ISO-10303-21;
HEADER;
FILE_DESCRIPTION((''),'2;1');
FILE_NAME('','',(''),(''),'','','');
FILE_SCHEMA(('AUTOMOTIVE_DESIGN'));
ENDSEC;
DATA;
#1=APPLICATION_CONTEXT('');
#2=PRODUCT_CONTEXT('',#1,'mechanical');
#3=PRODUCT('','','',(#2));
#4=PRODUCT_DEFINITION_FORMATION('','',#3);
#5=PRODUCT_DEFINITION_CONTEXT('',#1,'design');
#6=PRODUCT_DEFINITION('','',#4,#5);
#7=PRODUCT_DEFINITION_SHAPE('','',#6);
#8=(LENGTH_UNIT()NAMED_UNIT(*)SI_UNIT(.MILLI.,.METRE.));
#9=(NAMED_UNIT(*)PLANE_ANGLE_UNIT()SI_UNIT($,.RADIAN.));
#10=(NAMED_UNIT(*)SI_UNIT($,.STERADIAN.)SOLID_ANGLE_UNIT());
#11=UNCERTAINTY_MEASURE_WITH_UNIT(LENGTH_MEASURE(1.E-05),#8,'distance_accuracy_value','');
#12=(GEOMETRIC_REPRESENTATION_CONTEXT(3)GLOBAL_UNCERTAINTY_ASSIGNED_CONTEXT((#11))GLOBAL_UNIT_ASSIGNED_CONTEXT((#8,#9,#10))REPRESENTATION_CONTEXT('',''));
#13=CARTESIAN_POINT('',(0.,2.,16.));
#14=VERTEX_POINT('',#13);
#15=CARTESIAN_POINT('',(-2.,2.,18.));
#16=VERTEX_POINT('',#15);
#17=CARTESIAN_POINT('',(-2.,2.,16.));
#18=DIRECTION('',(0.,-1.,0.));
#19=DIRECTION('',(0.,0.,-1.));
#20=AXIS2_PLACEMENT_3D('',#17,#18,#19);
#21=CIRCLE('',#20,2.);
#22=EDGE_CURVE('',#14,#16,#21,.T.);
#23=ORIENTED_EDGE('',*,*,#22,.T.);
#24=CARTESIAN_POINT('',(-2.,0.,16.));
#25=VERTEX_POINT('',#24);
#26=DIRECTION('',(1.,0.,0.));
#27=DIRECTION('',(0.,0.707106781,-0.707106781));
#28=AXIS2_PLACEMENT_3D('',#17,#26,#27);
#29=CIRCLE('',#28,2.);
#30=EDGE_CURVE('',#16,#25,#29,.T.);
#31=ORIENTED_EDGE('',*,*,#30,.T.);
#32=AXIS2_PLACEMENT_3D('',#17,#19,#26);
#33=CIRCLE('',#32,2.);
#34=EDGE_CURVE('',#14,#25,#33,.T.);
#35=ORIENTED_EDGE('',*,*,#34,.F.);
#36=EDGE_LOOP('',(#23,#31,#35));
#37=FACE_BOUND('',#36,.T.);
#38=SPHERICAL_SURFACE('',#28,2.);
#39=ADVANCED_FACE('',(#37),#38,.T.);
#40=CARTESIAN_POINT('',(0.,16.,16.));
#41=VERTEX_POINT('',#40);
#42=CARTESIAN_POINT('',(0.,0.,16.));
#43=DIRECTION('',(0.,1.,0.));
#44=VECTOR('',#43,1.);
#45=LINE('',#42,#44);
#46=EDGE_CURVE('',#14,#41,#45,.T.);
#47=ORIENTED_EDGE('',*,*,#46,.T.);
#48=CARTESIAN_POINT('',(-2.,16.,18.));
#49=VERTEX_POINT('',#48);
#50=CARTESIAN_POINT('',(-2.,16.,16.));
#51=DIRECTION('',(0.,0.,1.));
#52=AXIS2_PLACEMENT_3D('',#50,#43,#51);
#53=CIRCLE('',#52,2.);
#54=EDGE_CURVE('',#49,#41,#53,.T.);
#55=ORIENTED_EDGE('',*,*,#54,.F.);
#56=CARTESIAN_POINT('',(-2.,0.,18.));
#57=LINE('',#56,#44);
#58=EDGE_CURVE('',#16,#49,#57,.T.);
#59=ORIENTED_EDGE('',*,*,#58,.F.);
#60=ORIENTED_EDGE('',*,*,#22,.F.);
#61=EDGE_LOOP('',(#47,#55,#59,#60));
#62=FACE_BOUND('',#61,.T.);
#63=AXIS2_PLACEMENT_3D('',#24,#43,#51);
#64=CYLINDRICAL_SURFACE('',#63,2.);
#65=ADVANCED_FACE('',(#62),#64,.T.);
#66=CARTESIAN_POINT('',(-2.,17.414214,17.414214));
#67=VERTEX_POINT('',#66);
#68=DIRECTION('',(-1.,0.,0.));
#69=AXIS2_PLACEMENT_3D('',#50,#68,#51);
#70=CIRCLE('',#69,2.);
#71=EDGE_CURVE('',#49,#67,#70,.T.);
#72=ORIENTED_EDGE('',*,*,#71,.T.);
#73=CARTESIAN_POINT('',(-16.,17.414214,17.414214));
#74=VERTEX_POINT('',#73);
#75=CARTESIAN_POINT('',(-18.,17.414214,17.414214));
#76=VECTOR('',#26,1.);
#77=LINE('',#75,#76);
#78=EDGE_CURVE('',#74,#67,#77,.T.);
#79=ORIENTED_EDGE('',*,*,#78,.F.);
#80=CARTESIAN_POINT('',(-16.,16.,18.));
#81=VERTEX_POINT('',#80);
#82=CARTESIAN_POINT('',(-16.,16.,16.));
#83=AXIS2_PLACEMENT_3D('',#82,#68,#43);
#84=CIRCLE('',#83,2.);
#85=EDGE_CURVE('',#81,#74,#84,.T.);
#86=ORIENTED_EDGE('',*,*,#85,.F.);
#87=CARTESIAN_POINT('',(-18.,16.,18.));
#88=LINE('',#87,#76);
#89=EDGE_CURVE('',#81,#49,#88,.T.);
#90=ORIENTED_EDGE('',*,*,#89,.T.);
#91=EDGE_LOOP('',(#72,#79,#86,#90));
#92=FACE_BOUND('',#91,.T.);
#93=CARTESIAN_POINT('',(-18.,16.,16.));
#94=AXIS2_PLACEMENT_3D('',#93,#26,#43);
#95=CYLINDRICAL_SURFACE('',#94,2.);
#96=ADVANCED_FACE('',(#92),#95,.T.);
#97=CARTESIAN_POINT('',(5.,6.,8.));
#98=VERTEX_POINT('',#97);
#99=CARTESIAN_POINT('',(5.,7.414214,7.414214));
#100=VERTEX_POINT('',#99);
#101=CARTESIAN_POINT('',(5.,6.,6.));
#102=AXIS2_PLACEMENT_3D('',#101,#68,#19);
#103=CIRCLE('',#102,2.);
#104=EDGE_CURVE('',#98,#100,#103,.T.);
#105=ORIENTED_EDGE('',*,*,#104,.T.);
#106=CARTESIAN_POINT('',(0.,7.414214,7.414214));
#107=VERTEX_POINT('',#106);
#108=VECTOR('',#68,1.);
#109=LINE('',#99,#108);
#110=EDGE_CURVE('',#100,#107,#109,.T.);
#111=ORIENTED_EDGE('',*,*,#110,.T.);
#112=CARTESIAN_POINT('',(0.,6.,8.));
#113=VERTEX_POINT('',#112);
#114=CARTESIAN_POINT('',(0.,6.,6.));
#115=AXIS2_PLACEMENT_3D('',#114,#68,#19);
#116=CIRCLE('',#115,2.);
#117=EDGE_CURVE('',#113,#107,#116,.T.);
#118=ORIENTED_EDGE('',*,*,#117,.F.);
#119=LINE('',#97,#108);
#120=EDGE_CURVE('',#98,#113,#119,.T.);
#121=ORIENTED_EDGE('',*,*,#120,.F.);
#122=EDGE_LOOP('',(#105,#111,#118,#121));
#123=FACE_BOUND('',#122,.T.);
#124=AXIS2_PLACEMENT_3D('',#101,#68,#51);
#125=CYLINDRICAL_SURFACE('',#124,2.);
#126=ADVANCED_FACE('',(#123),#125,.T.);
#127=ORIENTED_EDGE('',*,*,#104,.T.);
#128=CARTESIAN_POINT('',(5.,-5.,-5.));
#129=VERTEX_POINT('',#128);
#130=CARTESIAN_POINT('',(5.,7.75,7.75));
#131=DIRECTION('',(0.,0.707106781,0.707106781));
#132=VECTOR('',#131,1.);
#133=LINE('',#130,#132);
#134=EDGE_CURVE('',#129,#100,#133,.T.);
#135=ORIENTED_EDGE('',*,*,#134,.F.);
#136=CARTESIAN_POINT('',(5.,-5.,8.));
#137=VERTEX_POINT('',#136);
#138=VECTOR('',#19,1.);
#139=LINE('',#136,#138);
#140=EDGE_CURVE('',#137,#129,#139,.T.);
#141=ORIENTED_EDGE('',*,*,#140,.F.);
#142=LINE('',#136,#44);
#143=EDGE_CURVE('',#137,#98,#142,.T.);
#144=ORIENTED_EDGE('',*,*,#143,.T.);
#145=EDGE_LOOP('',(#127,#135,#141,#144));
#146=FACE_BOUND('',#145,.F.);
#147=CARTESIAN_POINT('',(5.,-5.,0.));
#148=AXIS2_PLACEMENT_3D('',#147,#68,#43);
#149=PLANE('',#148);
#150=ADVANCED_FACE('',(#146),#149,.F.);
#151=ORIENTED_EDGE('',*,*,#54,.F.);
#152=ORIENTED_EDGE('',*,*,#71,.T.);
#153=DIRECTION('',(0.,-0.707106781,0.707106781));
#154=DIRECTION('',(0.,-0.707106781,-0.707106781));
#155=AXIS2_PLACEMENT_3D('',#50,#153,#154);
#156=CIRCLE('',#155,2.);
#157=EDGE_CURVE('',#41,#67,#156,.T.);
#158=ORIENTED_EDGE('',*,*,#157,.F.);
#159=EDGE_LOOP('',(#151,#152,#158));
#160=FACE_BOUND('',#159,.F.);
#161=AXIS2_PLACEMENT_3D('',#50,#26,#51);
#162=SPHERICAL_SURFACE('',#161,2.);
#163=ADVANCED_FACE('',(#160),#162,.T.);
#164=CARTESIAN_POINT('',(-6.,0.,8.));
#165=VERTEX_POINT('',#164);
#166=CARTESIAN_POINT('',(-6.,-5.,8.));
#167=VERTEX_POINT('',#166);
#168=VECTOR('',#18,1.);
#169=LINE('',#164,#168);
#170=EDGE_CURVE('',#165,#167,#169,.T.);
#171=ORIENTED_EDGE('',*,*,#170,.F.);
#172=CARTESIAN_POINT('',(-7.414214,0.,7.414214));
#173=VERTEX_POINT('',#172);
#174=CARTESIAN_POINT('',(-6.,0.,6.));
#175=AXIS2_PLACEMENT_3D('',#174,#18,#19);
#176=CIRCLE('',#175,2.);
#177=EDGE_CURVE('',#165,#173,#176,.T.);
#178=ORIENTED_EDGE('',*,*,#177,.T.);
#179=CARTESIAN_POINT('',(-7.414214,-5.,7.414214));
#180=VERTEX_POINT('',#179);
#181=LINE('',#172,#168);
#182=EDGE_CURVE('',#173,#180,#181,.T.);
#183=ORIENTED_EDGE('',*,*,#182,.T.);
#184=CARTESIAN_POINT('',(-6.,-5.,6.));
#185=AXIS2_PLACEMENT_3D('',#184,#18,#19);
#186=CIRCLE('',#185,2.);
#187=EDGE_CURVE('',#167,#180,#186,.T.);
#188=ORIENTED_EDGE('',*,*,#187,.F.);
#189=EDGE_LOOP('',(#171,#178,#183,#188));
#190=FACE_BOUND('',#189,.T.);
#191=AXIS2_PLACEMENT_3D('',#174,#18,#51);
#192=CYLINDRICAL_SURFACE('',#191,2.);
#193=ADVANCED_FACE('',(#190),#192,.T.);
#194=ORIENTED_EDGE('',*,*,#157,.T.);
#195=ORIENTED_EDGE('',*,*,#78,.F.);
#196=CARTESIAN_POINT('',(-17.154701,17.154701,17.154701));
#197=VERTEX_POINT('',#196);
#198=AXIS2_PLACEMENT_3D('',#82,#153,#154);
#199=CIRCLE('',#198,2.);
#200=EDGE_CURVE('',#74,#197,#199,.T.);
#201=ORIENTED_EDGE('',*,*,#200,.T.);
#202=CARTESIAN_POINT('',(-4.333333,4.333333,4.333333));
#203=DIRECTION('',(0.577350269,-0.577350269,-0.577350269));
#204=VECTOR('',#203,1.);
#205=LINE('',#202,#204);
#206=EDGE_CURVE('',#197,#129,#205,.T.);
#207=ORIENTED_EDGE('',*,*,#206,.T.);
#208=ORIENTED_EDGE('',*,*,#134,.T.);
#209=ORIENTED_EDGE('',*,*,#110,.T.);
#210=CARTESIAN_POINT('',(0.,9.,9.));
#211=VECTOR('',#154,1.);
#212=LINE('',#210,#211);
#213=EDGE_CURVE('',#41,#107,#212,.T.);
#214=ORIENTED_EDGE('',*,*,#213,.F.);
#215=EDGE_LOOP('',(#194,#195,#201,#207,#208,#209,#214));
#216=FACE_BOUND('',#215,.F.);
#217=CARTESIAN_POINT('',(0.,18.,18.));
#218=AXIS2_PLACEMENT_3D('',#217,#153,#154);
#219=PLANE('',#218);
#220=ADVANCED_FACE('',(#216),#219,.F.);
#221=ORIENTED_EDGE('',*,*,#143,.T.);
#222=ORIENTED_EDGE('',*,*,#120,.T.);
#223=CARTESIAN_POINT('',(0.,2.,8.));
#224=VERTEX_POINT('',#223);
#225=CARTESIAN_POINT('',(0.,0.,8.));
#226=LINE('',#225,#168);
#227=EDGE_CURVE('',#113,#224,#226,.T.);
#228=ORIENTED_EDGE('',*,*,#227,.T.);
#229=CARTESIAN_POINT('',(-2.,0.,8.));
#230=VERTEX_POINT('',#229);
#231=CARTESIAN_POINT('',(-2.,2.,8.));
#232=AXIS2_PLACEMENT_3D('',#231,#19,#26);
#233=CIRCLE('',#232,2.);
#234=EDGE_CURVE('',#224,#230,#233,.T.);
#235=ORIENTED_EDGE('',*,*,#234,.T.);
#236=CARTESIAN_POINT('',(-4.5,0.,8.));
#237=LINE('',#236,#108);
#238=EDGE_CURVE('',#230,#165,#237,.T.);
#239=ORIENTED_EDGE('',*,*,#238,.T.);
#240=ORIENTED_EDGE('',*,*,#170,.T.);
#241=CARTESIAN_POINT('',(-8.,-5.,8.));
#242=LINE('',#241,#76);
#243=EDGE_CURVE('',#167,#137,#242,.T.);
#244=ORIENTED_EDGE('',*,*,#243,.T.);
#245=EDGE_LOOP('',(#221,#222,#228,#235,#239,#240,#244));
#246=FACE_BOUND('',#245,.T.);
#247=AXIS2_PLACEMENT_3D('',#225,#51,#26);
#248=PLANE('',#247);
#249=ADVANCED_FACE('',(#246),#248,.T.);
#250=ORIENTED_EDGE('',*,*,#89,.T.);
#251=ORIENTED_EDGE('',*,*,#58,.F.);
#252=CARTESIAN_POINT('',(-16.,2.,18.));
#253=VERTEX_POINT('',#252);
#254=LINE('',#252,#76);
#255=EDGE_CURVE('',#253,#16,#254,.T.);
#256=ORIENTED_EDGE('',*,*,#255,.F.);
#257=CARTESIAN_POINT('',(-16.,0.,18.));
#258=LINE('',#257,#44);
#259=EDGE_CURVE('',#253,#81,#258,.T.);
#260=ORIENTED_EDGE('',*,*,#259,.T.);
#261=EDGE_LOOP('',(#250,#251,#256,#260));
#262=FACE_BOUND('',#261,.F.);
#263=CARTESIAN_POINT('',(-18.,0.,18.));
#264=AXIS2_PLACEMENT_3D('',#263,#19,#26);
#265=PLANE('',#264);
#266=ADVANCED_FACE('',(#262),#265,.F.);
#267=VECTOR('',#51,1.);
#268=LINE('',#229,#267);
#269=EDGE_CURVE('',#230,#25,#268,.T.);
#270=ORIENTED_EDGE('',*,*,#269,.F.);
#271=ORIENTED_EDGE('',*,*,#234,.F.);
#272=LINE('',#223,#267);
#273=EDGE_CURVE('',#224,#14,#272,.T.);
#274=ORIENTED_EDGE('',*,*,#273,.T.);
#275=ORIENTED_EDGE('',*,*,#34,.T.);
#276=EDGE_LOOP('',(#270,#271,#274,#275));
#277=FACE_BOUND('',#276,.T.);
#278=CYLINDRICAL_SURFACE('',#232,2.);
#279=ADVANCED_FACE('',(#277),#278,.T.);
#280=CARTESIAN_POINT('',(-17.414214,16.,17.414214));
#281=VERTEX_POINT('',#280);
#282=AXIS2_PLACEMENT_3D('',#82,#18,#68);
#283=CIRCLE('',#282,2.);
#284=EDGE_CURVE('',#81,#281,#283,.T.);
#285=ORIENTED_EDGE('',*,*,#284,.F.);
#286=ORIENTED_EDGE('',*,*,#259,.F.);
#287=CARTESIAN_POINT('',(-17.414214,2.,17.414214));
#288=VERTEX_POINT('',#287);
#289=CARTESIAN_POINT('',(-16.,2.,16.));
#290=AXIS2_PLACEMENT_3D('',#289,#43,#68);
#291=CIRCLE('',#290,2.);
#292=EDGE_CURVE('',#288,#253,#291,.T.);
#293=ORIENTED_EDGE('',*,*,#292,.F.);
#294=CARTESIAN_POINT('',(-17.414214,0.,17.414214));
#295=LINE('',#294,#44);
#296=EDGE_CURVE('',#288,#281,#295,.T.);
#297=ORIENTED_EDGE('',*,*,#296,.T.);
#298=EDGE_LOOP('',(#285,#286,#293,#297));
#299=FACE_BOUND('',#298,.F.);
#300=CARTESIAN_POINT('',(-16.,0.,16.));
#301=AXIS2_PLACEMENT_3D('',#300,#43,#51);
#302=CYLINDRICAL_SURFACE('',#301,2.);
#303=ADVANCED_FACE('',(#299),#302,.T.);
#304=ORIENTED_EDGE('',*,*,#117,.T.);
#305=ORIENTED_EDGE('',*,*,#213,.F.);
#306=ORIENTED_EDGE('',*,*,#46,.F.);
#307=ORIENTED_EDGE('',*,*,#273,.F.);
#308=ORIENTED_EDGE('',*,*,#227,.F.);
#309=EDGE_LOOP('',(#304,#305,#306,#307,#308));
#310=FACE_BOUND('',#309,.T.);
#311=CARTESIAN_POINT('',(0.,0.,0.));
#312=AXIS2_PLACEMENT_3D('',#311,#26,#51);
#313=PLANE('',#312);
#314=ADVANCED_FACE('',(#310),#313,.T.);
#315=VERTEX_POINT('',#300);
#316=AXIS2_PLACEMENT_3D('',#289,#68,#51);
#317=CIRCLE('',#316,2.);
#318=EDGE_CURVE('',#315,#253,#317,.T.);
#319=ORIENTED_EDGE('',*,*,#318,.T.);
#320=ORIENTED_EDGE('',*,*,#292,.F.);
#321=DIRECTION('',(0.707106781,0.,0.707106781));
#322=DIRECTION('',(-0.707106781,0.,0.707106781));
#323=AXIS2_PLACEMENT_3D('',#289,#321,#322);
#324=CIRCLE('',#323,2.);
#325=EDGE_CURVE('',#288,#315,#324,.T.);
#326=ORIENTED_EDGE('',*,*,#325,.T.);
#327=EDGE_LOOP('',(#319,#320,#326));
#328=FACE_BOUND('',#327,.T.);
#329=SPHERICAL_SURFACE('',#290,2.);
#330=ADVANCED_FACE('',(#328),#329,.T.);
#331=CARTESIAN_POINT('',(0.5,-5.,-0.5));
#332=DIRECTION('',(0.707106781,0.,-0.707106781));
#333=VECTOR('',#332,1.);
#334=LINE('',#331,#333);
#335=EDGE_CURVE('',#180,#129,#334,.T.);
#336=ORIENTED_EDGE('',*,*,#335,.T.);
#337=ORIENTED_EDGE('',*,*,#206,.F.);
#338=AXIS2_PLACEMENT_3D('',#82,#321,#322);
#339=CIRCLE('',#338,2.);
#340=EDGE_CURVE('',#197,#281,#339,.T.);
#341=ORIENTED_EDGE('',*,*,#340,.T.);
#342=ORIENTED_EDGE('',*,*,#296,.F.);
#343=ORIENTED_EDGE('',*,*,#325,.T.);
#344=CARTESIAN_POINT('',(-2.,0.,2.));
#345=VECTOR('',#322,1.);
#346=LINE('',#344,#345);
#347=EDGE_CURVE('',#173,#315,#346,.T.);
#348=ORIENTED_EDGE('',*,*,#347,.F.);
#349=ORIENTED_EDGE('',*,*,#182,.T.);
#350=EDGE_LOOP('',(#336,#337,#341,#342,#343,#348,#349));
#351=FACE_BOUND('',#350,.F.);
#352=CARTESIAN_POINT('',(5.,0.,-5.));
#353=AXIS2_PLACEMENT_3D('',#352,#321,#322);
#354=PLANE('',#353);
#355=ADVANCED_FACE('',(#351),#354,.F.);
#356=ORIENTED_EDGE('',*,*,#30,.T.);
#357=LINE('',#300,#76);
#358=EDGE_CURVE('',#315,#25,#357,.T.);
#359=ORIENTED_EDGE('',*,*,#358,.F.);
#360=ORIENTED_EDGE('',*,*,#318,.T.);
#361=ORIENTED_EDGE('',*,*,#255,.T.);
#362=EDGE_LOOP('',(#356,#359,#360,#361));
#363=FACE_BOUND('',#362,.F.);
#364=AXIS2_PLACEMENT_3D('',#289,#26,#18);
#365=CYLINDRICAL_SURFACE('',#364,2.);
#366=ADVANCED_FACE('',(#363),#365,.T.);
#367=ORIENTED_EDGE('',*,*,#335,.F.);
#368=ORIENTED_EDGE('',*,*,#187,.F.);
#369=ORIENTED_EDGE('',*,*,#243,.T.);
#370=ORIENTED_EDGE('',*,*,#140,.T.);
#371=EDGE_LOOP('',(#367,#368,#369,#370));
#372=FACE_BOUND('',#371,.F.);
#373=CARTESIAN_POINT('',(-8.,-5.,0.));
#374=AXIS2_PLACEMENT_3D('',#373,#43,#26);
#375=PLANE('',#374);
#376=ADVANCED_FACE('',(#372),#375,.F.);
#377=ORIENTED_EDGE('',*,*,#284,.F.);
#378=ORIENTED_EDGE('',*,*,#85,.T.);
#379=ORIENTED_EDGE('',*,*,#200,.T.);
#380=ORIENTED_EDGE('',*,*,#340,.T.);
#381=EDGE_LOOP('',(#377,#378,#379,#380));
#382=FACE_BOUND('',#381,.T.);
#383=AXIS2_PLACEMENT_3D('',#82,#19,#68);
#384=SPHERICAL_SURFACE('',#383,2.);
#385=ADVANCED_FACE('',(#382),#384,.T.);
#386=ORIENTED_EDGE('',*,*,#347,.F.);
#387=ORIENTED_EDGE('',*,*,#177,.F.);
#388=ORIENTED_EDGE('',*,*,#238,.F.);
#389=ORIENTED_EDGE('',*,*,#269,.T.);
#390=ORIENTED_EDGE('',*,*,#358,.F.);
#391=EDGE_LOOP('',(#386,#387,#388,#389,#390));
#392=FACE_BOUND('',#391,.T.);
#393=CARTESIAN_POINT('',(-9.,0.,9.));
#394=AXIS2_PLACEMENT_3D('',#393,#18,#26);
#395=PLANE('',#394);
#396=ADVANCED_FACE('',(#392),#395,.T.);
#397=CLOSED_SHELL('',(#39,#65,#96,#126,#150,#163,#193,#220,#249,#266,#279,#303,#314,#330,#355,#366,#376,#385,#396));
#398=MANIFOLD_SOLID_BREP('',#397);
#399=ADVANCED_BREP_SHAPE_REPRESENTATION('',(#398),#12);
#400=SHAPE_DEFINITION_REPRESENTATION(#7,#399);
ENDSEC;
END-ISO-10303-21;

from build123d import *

# Parameters (mm, degrees)
F0_W         = 18
F0_H         = 18
F1_DEPTH     = 18
F2_W         = 10
F2_H         = 10
F2_W_2       = 3
F2_H_2       = 3
F3_DEPTH     = 5
F4_DEPTH     = 8
F5_R         = 2
F6_R         = 2
F7_T1_DEPTH  = 8
F7_T3_DEPTH  = 8
F7_T5_DEPTH  = 8
F7_S9_W      = 2
F7_S9_H      = 2
F7_T10_DEPTH = 2
F7_S15_W     = 2
F7_S15_H     = 2
F7_T16_DEPTH = 2
F7_S21_W     = 2
F7_S21_H     = 2
F7_T22_DEPTH = 2
F8_R         = 2
F10_DEPTH    = 20
F12_DEPTH    = 20


# Not quite as in the source:
# - a fillet or chamfer that OpenCascade refuses, or shapes differently, is made with other operations: its cross-section is extruded or revolved along the edge and cut away or added


with BuildPart() as f1:
    # F0 (on Front) → F1 (new body)
    with BuildSketch(Plane.XZ):
        with Locations((-9, 9)):
            Rectangle(F0_W, F0_H)
    extrude(amount=-F1_DEPTH)

    # F2 (on Top) → F3 (join)
    with BuildSketch(Plane.XY):
        Rectangle(F2_W, F2_H)
        with Locations((-6.5, 0)):
            Rectangle(F2_W_2, F2_H)
        with Locations((0, 6.5)):
            Rectangle(F2_W, F2_H_2)
        with Locations((-6.5, 6.5)):
            Rectangle(F2_W_2, F2_H_2)
    extrude(amount=-F3_DEPTH)

    # F2 (on Top) → F4 (join)
    with BuildSketch(Plane.XY):
        Rectangle(F2_W, F2_H)
        with Locations((-6.5, 0)):
            Rectangle(F2_W_2, F2_H)
        with Locations((0, 6.5)):
            Rectangle(F2_W, F2_H_2)
        with Locations((-6.5, 6.5)):
            Rectangle(F2_W_2, F2_H_2)
    extrude(amount=F4_DEPTH)

    # F5
    f5_edges = [f1.edges().sort_by_distance(p)[0] for p in [
        (-18, 18, 9),
        (-18, 9, 18),
        (-9, 18, 18),
    ]]
    fillet(f5_edges, radius=F5_R)

    # F6
    f6_edges = [f1.edges().sort_by_distance(p)[0] for p in [
        (0, 8, 18),
        (-8, 0, 18),
        (-18, 8, 0),
    ]]
    fillet(f6_edges, radius=F6_R)

    # F7: fillet of radius 2 on 3 edges, made by hand

    # F7_s2 → F7_t1 (cut)
    with BuildSketch(Plane.XZ.offset(-16)):
        with BuildLine():
            ThreePointArc((-2, 0), (-0.5857864376, 0.5857864376), (0, 2))
            Line((0, 2), (0, 0))
            Line((0, 0), (-2, 0))
        make_face()
    extrude(amount=F7_T1_DEPTH, mode=Mode.SUBTRACT)

    # F7_s4 → F7_t3 (cut)
    with BuildSketch(Plane.XY.offset(8)):
        with BuildLine():
            ThreePointArc((0, 2), (-0.5857864376, 0.5857864376), (-2, 0))
            Line((-2, 0), (0, 0))
            Line((0, 0), (0, 2))
        make_face()
    extrude(amount=F7_T3_DEPTH, mode=Mode.SUBTRACT)

    # F7_s6 → F7_t5 (cut)
    with BuildSketch(Plane.YZ.offset(-16)):
        with BuildLine():
            ThreePointArc((2, 0), (0.5857864376, 0.5857864376), (0, 2))
            Line((0, 2), (0, 0))
            Line((0, 0), (2, 0))
        make_face()
    extrude(amount=F7_T5_DEPTH, mode=Mode.SUBTRACT)


with BuildPart() as f7_tool8:
    # F7_s9 → F7_t10 (new body)
    with BuildSketch(Plane.XY.offset(2)):
        with Locations((-17, 1)):
            Rectangle(F7_S9_W, F7_S9_H)
    extrude(amount=-F7_T10_DEPTH)

    # F7_s11 → F7_t12 (revolve, cut)
    with BuildSketch(Plane(origin=(-16, 2, 2), x_dir=(0.7071067812, 0.7071067812, 0), z_dir=(-0.7071067812, 0.7071067812, 0))):
        with BuildLine():
            ThreePointArc((0, -2), (2, 0), (0, 2))
            Line((0, 2), (0, -2))
        make_face()
    revolve(axis=Axis((-16, 2, 2), (0, 0, -1)), mode=Mode.SUBTRACT)


with BuildPart() as f1_1:
    add(f1.part)

    # F7_t7: cut F7_tool8
    add(f7_tool8.part, mode=Mode.SUBTRACT)


with BuildPart() as f7_tool14:
    # F7_s15 → F7_t16 (new body)
    with BuildSketch(Plane.YZ.offset(-2)):
        with Locations((1, 17)):
            Rectangle(F7_S15_W, F7_S15_H)
    extrude(amount=F7_T16_DEPTH)

    # F7_s17 → F7_t18 (revolve, cut)
    with BuildSketch(Plane(origin=(-2, 2, 16), x_dir=(0, 0.7071067812, -0.7071067812), z_dir=(0, -0.7071067812, -0.7071067812))):
        with BuildLine():
            ThreePointArc((0, -2), (2, 0), (0, 2))
            Line((0, 2), (0, -2))
        make_face()
    revolve(axis=Axis((-2, 2, 16), (1, 0, 0)), mode=Mode.SUBTRACT)


with BuildPart() as f1_2:
    add(f1_1.part)

    # F7_t13: cut F7_tool14
    add(f7_tool14.part, mode=Mode.SUBTRACT)


with BuildPart() as f7_tool20:
    # F7_s21 → F7_t22 (new body)
    with BuildSketch(Plane.XY.offset(2)):
        with Locations((-1, 17)):
            Rectangle(F7_S21_W, F7_S21_H)
    extrude(amount=-F7_T22_DEPTH)

    # F7_s23 → F7_t24 (revolve, cut)
    with BuildSketch(Plane(origin=(-2, 16, 2), x_dir=(-0.7071067812, -0.7071067812, 0), z_dir=(0.7071067812, -0.7071067812, 0))):
        with BuildLine():
            ThreePointArc((0, -2), (2, 0), (0, 2))
            Line((0, 2), (0, -2))
        make_face()
    revolve(axis=Axis((-2, 16, 2), (0, 0, -1)), mode=Mode.SUBTRACT)


with BuildPart() as f1_3:
    add(f1_2.part)

    # F7_t19: cut F7_tool20
    add(f7_tool20.part, mode=Mode.SUBTRACT)

    # F8
    f8_edges = [f1_3.edges().sort_by_distance(p)[0] for p in [
        (-8, -2.5, 8),
        (2.5, 8, 8),
        (-8, 8, -2.5),
    ]]
    fillet(f8_edges, radius=F8_R)

    # F9 (on Front) → F10 (cut, symmetric)
    with BuildSketch(Plane.XZ):
        Polygon((5, -5), (-18, 18), (-18, -5), align=None)
    extrude(amount=F10_DEPTH, both=True, mode=Mode.SUBTRACT)

    # F11 (on Right) → F12 (cut, symmetric)
    with BuildSketch(Plane.YZ):
        Polygon((18, 18), (-5, -5), (18, -5), align=None)
    extrude(amount=F12_DEPTH, both=True, mode=Mode.SUBTRACT)


solid = f1_3.part
